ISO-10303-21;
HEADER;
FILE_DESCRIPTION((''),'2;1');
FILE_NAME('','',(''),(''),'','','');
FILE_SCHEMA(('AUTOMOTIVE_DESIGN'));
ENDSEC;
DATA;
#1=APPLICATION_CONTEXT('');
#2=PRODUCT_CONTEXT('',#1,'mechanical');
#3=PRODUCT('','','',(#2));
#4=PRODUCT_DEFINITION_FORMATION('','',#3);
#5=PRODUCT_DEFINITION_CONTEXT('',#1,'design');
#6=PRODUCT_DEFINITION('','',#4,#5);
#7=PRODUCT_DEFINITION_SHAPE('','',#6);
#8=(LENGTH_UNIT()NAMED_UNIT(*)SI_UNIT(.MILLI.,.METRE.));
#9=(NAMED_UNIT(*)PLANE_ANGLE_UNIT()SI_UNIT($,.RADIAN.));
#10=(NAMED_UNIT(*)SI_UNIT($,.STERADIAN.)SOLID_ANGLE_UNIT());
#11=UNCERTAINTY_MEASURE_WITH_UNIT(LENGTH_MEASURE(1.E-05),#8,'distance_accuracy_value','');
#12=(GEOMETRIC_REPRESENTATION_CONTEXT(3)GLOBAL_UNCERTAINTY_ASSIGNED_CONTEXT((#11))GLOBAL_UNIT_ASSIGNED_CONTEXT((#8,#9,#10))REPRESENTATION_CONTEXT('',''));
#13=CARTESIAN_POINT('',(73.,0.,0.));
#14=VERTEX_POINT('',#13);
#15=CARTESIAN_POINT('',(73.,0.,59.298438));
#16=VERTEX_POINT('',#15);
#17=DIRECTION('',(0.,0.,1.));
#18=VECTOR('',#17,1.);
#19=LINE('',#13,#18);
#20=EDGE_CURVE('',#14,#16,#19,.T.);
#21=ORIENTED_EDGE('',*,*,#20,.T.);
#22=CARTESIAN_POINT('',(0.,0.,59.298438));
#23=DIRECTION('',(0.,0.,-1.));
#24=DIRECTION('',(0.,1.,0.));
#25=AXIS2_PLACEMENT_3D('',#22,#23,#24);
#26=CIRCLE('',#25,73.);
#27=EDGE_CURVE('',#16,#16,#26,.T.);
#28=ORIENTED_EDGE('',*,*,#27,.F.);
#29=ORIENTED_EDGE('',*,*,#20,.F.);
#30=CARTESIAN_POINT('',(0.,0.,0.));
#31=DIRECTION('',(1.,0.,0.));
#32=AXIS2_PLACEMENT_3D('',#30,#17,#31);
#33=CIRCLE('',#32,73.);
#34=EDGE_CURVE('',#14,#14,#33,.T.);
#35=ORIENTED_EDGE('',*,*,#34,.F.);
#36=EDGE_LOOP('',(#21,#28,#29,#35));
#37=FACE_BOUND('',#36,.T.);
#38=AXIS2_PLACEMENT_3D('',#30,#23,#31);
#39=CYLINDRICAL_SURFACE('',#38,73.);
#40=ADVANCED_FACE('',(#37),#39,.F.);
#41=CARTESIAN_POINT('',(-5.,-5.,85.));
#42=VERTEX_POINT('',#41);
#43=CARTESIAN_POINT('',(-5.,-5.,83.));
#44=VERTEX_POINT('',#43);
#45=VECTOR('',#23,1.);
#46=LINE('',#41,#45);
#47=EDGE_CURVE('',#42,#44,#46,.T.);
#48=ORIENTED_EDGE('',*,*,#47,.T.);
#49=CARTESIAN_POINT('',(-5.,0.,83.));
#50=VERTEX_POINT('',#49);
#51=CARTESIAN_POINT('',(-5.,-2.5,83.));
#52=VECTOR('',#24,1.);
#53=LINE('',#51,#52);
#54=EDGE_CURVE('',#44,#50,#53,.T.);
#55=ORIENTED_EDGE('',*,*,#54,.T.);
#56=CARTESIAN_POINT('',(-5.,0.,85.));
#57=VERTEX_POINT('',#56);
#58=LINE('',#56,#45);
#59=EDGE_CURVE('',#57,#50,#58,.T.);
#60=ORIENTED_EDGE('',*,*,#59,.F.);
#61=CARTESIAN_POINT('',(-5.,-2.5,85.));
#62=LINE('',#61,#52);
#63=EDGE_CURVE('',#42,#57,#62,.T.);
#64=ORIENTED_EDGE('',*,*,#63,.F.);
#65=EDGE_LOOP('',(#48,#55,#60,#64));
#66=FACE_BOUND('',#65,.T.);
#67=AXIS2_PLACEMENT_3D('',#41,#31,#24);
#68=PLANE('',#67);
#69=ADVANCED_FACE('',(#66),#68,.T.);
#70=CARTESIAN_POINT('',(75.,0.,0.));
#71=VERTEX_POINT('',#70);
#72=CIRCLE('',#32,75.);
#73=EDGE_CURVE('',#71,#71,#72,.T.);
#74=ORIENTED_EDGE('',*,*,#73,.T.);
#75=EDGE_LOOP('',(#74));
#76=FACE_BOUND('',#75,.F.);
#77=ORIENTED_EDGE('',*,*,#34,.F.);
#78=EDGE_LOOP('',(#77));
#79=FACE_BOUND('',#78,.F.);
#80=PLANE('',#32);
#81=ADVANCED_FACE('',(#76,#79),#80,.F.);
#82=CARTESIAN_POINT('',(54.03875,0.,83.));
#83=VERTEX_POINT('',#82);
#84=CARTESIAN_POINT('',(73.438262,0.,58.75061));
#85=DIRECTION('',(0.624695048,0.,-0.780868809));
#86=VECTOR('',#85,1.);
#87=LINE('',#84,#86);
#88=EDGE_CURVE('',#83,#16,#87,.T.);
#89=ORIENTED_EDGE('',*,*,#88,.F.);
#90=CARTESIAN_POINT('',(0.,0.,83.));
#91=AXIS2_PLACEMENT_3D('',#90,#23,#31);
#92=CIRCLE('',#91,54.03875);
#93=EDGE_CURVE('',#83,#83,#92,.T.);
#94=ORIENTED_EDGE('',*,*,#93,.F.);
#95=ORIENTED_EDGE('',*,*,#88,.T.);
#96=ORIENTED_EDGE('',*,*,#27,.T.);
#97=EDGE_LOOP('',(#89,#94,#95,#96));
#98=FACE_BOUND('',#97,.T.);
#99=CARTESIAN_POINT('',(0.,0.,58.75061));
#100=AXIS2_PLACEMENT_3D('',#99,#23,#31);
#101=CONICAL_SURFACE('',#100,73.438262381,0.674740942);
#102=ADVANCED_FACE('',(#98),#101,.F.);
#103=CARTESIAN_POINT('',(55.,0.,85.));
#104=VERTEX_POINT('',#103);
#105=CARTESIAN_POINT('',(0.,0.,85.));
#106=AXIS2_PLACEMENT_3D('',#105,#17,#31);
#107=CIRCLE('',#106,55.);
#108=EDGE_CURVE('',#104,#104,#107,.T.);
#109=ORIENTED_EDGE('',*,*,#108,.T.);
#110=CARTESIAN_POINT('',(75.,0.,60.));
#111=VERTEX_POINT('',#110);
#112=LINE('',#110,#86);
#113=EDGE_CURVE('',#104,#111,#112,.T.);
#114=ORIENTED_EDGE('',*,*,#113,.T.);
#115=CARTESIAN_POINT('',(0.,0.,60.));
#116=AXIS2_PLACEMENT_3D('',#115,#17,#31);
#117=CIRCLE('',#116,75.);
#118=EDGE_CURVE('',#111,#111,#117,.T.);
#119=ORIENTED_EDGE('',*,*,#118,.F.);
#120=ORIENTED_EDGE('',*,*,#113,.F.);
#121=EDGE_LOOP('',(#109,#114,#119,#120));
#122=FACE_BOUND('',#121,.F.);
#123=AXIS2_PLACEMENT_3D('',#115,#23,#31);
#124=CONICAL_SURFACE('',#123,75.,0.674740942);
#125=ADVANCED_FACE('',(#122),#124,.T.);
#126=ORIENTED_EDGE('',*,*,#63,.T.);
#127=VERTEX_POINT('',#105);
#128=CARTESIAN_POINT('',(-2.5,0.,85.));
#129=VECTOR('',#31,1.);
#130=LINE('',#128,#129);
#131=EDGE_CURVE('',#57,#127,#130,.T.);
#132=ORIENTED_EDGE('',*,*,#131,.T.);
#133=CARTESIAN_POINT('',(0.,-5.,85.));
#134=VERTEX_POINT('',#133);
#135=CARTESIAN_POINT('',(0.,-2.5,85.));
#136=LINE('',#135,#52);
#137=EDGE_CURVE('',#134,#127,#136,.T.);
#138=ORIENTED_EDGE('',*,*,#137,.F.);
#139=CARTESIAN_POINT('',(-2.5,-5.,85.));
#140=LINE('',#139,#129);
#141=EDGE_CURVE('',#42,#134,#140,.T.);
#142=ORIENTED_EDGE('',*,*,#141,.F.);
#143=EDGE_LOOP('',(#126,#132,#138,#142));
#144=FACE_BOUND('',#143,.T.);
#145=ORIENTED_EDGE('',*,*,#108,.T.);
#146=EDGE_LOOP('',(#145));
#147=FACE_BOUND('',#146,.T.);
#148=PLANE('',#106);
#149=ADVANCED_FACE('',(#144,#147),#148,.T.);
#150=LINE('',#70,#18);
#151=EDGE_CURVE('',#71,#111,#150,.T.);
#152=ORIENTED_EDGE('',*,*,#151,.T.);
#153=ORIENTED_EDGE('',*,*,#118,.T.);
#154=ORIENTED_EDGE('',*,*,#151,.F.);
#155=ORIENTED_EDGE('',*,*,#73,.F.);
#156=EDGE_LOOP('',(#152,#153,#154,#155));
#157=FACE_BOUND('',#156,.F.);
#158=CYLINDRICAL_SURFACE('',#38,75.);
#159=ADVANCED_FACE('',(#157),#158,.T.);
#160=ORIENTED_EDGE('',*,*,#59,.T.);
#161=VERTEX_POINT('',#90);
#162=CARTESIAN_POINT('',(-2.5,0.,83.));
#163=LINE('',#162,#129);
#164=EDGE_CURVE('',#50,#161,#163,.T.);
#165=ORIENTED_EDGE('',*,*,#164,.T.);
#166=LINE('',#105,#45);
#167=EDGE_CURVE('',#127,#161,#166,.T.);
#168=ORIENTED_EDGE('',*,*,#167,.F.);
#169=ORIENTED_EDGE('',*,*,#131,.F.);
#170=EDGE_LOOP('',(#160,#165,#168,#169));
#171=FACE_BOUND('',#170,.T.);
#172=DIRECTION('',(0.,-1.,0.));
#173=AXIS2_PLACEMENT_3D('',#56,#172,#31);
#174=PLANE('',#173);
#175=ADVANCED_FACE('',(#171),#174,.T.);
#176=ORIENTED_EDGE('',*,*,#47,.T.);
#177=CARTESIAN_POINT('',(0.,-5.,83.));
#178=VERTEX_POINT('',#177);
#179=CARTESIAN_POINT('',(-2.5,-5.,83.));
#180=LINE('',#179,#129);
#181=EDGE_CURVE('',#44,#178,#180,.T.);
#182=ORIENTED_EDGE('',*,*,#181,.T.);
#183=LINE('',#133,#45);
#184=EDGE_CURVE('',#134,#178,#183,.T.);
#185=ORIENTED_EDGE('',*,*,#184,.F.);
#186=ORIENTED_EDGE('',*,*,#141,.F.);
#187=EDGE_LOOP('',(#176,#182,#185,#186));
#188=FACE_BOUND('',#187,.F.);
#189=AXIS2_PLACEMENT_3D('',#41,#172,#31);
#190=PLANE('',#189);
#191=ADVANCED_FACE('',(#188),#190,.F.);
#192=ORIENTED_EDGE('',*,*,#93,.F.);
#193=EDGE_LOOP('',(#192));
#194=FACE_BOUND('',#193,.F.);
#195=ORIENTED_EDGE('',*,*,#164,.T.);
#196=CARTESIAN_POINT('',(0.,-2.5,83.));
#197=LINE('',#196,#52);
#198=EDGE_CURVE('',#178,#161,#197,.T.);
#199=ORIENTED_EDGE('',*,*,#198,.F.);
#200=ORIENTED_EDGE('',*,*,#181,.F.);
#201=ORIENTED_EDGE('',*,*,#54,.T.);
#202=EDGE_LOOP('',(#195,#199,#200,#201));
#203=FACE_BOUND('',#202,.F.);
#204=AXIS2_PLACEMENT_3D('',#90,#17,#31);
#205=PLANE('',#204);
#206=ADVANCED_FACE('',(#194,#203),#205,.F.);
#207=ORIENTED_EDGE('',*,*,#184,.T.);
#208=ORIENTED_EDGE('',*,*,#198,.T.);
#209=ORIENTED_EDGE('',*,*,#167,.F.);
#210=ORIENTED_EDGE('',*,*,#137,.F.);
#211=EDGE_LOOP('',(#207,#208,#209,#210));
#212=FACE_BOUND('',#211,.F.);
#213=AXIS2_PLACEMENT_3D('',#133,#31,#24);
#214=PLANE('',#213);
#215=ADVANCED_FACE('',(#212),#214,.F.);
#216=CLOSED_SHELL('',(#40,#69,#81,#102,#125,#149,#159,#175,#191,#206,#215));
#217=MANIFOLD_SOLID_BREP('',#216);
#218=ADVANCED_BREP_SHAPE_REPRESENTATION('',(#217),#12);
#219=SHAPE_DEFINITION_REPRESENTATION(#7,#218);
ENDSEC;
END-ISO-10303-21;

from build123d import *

# Parameters (mm, degrees)
F0_R     = 75
F1_DEPTH = 85
F2_SIZE2 = 25
F2_SIZE  = 20
F3_T     = -2
F4_W     = 5
F4_H     = 5
F5_DEPTH = 85.001


# Not quite as in the source:
# - the program builds the solid bodies; features that only make, move or delete a surface that nothing else refers to are left out


with BuildPart() as f1:
    # F0 (on Top) → F1 (new body)
    with BuildSketch(Plane.XY):
        Circle(F0_R)
    extrude(amount=F1_DEPTH)

    # F2
    f2_edges = [f1.edges().sort_by_distance(p)[0] for p in [
        (-75, 0, 85),
    ]]
    f2_side = f1.faces().sort_by_distance((0, 0, 85))[0]
    chamfer(f2_edges, length=F2_SIZE, length2=F2_SIZE2, reference=f2_side)

    # F3
    f3_openings = [f1.faces().sort_by_distance(p)[0] for p in [
        (0, 0, 0),
    ]]
    offset(amount=F3_T, openings=f3_openings)

    # F4 (on face) → F5 (cut, through all)
    with BuildSketch(Plane.XY.offset(85)):
        with Locations((-2.5, -2.5)):
            Rectangle(F4_W, F4_H)
    extrude(amount=-F5_DEPTH, mode=Mode.SUBTRACT)


solid = f1.part
